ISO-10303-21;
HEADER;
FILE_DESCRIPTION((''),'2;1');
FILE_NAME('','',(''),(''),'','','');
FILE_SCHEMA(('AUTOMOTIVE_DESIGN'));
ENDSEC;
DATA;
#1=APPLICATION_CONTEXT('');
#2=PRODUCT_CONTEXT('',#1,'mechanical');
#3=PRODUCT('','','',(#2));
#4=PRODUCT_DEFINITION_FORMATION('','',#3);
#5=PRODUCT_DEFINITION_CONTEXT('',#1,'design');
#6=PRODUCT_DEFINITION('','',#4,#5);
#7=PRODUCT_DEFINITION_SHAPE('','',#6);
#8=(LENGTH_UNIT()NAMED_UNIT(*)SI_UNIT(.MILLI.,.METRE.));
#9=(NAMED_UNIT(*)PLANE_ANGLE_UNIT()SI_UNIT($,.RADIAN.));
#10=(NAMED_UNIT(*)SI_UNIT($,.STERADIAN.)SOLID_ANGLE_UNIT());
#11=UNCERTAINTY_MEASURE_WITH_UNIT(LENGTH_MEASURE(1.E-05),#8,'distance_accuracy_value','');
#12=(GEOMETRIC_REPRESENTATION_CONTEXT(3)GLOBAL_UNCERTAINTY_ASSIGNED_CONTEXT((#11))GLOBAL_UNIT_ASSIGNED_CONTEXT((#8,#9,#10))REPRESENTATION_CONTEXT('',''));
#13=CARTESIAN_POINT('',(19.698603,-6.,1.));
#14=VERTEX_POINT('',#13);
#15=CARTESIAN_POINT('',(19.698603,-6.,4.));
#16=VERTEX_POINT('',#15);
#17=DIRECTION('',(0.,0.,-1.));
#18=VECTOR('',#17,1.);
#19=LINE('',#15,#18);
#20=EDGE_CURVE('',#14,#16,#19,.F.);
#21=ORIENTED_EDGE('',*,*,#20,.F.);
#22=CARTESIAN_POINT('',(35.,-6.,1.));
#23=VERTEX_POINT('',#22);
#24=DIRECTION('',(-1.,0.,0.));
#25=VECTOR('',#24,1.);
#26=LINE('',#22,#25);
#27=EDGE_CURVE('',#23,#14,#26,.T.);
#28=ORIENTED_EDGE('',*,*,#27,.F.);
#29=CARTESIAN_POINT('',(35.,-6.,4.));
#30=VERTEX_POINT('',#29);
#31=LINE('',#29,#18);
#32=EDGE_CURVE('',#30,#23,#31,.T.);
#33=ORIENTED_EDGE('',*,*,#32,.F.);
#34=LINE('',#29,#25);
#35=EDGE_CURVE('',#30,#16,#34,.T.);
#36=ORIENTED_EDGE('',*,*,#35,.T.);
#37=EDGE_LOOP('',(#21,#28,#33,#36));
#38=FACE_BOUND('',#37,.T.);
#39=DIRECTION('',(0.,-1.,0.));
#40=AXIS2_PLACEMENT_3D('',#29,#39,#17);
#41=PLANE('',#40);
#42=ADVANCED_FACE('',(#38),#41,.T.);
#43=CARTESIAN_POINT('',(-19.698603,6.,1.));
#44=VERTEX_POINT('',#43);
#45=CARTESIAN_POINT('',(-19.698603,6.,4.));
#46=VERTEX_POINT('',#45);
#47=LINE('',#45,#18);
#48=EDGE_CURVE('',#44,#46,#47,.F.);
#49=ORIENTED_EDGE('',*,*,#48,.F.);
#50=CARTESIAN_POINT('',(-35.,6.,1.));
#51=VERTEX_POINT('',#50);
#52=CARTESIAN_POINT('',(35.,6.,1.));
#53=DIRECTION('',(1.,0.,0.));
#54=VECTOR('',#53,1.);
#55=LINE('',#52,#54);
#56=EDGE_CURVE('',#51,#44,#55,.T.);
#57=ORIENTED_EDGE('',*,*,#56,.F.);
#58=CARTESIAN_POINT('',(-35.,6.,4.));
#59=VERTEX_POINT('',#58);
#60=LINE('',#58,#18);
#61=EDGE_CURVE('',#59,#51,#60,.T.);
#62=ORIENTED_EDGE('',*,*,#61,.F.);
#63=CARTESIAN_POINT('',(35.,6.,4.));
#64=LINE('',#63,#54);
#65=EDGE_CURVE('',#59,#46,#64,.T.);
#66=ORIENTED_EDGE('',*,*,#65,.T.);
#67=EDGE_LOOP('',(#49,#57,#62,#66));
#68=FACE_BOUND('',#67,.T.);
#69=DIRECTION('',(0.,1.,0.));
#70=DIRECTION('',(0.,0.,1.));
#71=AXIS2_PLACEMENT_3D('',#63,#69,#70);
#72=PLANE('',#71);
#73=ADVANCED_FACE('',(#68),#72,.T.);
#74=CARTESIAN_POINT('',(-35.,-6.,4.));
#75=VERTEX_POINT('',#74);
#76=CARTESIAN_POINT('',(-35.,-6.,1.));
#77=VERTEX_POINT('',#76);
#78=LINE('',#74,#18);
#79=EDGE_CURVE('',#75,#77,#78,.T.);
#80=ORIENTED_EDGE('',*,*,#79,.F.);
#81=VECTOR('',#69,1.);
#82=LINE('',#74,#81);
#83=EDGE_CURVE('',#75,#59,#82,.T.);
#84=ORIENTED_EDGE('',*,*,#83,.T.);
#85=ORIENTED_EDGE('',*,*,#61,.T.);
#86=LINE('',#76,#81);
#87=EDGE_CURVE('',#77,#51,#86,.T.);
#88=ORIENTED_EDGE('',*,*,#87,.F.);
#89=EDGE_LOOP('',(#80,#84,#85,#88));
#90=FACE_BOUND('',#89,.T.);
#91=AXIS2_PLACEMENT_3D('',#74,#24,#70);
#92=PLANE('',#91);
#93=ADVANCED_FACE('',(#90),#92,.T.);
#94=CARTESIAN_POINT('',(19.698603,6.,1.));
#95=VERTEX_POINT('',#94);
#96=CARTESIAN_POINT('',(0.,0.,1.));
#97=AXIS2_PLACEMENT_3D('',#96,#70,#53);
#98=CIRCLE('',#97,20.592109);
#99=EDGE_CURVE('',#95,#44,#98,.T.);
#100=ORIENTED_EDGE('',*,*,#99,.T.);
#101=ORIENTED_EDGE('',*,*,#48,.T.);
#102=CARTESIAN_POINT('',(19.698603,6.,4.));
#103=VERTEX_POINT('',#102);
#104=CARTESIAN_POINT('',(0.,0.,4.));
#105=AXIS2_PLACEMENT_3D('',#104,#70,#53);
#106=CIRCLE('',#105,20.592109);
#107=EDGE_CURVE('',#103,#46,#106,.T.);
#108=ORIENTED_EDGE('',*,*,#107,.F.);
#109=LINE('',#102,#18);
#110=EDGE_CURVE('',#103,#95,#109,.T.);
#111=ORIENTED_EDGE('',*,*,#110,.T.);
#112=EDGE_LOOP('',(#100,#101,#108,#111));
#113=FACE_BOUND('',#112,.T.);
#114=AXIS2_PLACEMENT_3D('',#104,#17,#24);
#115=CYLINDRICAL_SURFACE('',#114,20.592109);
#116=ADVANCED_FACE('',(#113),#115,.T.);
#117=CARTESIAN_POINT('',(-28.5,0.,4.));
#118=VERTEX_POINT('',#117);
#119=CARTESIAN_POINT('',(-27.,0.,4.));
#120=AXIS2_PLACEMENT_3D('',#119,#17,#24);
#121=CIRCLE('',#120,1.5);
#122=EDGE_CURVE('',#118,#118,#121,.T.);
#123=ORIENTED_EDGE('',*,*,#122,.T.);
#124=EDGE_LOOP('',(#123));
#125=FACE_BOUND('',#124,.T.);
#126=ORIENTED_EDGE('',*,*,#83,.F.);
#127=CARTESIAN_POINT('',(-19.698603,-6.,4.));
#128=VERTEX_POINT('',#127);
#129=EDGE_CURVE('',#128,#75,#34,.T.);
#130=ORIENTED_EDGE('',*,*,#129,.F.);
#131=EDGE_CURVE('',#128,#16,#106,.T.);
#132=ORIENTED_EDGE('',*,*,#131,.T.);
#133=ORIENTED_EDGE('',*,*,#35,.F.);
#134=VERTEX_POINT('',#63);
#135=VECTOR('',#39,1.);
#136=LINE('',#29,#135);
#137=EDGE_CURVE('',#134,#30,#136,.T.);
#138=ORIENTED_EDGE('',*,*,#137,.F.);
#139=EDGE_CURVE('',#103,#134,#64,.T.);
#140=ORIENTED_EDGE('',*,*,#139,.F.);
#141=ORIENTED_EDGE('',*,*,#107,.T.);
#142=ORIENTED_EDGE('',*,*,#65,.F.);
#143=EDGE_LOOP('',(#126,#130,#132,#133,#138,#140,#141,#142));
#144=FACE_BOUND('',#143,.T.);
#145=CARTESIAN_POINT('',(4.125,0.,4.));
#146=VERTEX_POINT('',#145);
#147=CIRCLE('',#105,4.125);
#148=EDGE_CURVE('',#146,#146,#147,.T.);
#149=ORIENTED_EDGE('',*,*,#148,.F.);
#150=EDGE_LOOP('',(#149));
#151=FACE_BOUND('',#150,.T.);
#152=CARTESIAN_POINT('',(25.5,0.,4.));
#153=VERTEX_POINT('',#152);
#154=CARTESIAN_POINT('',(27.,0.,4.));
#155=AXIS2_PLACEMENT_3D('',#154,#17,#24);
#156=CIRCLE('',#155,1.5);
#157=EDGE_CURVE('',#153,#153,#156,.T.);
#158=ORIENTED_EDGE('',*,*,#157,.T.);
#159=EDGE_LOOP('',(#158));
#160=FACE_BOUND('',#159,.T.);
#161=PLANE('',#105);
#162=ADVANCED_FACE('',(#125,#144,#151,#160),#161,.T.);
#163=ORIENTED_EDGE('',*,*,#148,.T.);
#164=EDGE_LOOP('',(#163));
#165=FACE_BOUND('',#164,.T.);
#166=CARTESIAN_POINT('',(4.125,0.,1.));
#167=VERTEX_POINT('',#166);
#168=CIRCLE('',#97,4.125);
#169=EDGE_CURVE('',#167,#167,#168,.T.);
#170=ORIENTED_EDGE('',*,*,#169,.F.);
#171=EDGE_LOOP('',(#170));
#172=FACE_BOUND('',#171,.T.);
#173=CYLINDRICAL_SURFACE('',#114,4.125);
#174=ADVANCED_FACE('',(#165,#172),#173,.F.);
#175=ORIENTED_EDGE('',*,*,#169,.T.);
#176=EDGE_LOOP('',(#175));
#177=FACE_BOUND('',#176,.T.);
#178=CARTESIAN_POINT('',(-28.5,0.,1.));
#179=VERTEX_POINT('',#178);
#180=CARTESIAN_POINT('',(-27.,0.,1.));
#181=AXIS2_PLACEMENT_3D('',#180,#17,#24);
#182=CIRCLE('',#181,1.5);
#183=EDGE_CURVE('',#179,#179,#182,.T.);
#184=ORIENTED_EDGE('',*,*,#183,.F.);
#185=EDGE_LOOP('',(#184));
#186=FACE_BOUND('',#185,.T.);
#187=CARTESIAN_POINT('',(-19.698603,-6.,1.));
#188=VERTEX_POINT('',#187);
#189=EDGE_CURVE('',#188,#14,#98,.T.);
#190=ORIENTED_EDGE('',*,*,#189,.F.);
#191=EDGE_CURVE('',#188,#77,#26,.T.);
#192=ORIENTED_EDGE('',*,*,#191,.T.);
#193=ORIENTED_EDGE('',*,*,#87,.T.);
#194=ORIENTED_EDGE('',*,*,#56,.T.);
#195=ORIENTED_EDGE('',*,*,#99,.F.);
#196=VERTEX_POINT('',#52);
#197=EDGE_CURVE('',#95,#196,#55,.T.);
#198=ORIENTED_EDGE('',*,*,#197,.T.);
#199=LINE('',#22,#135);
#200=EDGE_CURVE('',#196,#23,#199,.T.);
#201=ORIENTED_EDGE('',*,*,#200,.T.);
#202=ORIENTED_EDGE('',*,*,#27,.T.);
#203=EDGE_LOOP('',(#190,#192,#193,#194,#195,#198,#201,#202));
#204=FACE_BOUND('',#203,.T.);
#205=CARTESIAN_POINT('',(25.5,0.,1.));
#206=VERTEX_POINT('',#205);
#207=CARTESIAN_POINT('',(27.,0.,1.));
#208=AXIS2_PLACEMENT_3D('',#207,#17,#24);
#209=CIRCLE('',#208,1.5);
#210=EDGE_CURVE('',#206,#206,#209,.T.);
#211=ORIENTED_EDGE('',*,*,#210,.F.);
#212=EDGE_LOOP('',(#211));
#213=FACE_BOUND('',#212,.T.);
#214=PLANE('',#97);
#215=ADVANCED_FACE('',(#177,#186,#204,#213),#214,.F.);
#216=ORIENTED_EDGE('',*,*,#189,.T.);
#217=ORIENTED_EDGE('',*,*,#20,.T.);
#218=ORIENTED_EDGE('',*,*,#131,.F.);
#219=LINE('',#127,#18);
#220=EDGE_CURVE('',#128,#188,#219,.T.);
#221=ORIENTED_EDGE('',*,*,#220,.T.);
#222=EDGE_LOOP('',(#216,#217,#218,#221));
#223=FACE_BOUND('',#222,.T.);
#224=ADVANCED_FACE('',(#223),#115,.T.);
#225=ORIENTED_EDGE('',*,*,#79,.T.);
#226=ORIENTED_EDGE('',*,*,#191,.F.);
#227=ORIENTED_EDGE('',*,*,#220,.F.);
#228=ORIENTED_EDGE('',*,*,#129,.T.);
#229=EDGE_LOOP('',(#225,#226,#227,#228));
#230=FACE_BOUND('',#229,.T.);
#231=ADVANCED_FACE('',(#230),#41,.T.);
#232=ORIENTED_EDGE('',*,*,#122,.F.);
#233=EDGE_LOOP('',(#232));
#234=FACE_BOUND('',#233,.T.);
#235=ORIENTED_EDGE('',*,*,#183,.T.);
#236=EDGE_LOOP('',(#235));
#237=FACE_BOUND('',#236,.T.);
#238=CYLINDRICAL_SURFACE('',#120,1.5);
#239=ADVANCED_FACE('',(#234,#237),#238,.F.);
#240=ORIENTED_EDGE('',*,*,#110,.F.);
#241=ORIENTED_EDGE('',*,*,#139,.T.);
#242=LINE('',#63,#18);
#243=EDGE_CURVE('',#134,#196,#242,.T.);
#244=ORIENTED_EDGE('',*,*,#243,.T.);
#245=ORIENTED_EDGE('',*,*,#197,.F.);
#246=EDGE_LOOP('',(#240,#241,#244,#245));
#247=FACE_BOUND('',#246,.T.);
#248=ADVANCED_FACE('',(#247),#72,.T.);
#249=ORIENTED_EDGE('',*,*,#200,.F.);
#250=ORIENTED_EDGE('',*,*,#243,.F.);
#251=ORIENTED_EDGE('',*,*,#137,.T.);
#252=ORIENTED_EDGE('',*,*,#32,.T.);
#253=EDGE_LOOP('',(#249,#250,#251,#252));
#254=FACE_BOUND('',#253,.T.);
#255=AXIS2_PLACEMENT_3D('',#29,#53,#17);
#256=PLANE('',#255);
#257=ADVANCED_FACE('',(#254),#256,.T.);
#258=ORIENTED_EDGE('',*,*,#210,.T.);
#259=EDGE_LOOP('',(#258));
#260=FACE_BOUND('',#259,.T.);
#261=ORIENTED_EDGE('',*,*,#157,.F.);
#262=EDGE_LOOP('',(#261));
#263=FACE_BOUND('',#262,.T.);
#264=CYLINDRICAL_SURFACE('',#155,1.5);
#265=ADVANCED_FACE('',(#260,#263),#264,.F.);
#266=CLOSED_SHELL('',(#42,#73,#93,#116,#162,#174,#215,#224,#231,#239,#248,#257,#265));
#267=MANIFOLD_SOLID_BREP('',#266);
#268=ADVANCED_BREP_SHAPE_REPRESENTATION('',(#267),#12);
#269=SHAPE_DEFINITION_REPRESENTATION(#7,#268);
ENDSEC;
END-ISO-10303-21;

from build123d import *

# Parameters (mm, degrees)
SKETCH2_R           = 20.592109163
SKETCH2_R_2         = 4.125
BOSS_EXTRUDE1_DEPTH = 3
SKETCH3_W           = 70
SKETCH3_H           = 12
SKETCH3_R           = 1.5
SKETCH3_R_2         = 4.125
BOSS_EXTRUDE2_DEPTH = 3


# Read off the part's stored shape, not the designer's step: Gear 60pitch part02.STEP
with BuildPart() as part:
    # Sketch2 → Boss-Extrude1 (new body)
    with BuildSketch(Plane.XY.offset(1)):
        Circle(SKETCH2_R)
        Circle(SKETCH2_R_2, mode=Mode.SUBTRACT)
    extrude(amount=BOSS_EXTRUDE1_DEPTH)

    # Sketch3 → Boss-Extrude2 (add)
    with BuildSketch(Plane(origin=(0, 0, 1), x_dir=(-1, 0, 0), z_dir=(0, 0, -1))):
        Rectangle(SKETCH3_W, SKETCH3_H)
        with Locations((-27, 0)):
            Circle(SKETCH3_R, mode=Mode.SUBTRACT)
        with Locations((27, 0)):
            Circle(SKETCH3_R, mode=Mode.SUBTRACT)
        with Locations(Location((0, 0, 0), (0, 0, 180))):
            Circle(SKETCH3_R_2, mode=Mode.SUBTRACT)
    extrude(amount=-BOSS_EXTRUDE2_DEPTH)


solid = part.part
